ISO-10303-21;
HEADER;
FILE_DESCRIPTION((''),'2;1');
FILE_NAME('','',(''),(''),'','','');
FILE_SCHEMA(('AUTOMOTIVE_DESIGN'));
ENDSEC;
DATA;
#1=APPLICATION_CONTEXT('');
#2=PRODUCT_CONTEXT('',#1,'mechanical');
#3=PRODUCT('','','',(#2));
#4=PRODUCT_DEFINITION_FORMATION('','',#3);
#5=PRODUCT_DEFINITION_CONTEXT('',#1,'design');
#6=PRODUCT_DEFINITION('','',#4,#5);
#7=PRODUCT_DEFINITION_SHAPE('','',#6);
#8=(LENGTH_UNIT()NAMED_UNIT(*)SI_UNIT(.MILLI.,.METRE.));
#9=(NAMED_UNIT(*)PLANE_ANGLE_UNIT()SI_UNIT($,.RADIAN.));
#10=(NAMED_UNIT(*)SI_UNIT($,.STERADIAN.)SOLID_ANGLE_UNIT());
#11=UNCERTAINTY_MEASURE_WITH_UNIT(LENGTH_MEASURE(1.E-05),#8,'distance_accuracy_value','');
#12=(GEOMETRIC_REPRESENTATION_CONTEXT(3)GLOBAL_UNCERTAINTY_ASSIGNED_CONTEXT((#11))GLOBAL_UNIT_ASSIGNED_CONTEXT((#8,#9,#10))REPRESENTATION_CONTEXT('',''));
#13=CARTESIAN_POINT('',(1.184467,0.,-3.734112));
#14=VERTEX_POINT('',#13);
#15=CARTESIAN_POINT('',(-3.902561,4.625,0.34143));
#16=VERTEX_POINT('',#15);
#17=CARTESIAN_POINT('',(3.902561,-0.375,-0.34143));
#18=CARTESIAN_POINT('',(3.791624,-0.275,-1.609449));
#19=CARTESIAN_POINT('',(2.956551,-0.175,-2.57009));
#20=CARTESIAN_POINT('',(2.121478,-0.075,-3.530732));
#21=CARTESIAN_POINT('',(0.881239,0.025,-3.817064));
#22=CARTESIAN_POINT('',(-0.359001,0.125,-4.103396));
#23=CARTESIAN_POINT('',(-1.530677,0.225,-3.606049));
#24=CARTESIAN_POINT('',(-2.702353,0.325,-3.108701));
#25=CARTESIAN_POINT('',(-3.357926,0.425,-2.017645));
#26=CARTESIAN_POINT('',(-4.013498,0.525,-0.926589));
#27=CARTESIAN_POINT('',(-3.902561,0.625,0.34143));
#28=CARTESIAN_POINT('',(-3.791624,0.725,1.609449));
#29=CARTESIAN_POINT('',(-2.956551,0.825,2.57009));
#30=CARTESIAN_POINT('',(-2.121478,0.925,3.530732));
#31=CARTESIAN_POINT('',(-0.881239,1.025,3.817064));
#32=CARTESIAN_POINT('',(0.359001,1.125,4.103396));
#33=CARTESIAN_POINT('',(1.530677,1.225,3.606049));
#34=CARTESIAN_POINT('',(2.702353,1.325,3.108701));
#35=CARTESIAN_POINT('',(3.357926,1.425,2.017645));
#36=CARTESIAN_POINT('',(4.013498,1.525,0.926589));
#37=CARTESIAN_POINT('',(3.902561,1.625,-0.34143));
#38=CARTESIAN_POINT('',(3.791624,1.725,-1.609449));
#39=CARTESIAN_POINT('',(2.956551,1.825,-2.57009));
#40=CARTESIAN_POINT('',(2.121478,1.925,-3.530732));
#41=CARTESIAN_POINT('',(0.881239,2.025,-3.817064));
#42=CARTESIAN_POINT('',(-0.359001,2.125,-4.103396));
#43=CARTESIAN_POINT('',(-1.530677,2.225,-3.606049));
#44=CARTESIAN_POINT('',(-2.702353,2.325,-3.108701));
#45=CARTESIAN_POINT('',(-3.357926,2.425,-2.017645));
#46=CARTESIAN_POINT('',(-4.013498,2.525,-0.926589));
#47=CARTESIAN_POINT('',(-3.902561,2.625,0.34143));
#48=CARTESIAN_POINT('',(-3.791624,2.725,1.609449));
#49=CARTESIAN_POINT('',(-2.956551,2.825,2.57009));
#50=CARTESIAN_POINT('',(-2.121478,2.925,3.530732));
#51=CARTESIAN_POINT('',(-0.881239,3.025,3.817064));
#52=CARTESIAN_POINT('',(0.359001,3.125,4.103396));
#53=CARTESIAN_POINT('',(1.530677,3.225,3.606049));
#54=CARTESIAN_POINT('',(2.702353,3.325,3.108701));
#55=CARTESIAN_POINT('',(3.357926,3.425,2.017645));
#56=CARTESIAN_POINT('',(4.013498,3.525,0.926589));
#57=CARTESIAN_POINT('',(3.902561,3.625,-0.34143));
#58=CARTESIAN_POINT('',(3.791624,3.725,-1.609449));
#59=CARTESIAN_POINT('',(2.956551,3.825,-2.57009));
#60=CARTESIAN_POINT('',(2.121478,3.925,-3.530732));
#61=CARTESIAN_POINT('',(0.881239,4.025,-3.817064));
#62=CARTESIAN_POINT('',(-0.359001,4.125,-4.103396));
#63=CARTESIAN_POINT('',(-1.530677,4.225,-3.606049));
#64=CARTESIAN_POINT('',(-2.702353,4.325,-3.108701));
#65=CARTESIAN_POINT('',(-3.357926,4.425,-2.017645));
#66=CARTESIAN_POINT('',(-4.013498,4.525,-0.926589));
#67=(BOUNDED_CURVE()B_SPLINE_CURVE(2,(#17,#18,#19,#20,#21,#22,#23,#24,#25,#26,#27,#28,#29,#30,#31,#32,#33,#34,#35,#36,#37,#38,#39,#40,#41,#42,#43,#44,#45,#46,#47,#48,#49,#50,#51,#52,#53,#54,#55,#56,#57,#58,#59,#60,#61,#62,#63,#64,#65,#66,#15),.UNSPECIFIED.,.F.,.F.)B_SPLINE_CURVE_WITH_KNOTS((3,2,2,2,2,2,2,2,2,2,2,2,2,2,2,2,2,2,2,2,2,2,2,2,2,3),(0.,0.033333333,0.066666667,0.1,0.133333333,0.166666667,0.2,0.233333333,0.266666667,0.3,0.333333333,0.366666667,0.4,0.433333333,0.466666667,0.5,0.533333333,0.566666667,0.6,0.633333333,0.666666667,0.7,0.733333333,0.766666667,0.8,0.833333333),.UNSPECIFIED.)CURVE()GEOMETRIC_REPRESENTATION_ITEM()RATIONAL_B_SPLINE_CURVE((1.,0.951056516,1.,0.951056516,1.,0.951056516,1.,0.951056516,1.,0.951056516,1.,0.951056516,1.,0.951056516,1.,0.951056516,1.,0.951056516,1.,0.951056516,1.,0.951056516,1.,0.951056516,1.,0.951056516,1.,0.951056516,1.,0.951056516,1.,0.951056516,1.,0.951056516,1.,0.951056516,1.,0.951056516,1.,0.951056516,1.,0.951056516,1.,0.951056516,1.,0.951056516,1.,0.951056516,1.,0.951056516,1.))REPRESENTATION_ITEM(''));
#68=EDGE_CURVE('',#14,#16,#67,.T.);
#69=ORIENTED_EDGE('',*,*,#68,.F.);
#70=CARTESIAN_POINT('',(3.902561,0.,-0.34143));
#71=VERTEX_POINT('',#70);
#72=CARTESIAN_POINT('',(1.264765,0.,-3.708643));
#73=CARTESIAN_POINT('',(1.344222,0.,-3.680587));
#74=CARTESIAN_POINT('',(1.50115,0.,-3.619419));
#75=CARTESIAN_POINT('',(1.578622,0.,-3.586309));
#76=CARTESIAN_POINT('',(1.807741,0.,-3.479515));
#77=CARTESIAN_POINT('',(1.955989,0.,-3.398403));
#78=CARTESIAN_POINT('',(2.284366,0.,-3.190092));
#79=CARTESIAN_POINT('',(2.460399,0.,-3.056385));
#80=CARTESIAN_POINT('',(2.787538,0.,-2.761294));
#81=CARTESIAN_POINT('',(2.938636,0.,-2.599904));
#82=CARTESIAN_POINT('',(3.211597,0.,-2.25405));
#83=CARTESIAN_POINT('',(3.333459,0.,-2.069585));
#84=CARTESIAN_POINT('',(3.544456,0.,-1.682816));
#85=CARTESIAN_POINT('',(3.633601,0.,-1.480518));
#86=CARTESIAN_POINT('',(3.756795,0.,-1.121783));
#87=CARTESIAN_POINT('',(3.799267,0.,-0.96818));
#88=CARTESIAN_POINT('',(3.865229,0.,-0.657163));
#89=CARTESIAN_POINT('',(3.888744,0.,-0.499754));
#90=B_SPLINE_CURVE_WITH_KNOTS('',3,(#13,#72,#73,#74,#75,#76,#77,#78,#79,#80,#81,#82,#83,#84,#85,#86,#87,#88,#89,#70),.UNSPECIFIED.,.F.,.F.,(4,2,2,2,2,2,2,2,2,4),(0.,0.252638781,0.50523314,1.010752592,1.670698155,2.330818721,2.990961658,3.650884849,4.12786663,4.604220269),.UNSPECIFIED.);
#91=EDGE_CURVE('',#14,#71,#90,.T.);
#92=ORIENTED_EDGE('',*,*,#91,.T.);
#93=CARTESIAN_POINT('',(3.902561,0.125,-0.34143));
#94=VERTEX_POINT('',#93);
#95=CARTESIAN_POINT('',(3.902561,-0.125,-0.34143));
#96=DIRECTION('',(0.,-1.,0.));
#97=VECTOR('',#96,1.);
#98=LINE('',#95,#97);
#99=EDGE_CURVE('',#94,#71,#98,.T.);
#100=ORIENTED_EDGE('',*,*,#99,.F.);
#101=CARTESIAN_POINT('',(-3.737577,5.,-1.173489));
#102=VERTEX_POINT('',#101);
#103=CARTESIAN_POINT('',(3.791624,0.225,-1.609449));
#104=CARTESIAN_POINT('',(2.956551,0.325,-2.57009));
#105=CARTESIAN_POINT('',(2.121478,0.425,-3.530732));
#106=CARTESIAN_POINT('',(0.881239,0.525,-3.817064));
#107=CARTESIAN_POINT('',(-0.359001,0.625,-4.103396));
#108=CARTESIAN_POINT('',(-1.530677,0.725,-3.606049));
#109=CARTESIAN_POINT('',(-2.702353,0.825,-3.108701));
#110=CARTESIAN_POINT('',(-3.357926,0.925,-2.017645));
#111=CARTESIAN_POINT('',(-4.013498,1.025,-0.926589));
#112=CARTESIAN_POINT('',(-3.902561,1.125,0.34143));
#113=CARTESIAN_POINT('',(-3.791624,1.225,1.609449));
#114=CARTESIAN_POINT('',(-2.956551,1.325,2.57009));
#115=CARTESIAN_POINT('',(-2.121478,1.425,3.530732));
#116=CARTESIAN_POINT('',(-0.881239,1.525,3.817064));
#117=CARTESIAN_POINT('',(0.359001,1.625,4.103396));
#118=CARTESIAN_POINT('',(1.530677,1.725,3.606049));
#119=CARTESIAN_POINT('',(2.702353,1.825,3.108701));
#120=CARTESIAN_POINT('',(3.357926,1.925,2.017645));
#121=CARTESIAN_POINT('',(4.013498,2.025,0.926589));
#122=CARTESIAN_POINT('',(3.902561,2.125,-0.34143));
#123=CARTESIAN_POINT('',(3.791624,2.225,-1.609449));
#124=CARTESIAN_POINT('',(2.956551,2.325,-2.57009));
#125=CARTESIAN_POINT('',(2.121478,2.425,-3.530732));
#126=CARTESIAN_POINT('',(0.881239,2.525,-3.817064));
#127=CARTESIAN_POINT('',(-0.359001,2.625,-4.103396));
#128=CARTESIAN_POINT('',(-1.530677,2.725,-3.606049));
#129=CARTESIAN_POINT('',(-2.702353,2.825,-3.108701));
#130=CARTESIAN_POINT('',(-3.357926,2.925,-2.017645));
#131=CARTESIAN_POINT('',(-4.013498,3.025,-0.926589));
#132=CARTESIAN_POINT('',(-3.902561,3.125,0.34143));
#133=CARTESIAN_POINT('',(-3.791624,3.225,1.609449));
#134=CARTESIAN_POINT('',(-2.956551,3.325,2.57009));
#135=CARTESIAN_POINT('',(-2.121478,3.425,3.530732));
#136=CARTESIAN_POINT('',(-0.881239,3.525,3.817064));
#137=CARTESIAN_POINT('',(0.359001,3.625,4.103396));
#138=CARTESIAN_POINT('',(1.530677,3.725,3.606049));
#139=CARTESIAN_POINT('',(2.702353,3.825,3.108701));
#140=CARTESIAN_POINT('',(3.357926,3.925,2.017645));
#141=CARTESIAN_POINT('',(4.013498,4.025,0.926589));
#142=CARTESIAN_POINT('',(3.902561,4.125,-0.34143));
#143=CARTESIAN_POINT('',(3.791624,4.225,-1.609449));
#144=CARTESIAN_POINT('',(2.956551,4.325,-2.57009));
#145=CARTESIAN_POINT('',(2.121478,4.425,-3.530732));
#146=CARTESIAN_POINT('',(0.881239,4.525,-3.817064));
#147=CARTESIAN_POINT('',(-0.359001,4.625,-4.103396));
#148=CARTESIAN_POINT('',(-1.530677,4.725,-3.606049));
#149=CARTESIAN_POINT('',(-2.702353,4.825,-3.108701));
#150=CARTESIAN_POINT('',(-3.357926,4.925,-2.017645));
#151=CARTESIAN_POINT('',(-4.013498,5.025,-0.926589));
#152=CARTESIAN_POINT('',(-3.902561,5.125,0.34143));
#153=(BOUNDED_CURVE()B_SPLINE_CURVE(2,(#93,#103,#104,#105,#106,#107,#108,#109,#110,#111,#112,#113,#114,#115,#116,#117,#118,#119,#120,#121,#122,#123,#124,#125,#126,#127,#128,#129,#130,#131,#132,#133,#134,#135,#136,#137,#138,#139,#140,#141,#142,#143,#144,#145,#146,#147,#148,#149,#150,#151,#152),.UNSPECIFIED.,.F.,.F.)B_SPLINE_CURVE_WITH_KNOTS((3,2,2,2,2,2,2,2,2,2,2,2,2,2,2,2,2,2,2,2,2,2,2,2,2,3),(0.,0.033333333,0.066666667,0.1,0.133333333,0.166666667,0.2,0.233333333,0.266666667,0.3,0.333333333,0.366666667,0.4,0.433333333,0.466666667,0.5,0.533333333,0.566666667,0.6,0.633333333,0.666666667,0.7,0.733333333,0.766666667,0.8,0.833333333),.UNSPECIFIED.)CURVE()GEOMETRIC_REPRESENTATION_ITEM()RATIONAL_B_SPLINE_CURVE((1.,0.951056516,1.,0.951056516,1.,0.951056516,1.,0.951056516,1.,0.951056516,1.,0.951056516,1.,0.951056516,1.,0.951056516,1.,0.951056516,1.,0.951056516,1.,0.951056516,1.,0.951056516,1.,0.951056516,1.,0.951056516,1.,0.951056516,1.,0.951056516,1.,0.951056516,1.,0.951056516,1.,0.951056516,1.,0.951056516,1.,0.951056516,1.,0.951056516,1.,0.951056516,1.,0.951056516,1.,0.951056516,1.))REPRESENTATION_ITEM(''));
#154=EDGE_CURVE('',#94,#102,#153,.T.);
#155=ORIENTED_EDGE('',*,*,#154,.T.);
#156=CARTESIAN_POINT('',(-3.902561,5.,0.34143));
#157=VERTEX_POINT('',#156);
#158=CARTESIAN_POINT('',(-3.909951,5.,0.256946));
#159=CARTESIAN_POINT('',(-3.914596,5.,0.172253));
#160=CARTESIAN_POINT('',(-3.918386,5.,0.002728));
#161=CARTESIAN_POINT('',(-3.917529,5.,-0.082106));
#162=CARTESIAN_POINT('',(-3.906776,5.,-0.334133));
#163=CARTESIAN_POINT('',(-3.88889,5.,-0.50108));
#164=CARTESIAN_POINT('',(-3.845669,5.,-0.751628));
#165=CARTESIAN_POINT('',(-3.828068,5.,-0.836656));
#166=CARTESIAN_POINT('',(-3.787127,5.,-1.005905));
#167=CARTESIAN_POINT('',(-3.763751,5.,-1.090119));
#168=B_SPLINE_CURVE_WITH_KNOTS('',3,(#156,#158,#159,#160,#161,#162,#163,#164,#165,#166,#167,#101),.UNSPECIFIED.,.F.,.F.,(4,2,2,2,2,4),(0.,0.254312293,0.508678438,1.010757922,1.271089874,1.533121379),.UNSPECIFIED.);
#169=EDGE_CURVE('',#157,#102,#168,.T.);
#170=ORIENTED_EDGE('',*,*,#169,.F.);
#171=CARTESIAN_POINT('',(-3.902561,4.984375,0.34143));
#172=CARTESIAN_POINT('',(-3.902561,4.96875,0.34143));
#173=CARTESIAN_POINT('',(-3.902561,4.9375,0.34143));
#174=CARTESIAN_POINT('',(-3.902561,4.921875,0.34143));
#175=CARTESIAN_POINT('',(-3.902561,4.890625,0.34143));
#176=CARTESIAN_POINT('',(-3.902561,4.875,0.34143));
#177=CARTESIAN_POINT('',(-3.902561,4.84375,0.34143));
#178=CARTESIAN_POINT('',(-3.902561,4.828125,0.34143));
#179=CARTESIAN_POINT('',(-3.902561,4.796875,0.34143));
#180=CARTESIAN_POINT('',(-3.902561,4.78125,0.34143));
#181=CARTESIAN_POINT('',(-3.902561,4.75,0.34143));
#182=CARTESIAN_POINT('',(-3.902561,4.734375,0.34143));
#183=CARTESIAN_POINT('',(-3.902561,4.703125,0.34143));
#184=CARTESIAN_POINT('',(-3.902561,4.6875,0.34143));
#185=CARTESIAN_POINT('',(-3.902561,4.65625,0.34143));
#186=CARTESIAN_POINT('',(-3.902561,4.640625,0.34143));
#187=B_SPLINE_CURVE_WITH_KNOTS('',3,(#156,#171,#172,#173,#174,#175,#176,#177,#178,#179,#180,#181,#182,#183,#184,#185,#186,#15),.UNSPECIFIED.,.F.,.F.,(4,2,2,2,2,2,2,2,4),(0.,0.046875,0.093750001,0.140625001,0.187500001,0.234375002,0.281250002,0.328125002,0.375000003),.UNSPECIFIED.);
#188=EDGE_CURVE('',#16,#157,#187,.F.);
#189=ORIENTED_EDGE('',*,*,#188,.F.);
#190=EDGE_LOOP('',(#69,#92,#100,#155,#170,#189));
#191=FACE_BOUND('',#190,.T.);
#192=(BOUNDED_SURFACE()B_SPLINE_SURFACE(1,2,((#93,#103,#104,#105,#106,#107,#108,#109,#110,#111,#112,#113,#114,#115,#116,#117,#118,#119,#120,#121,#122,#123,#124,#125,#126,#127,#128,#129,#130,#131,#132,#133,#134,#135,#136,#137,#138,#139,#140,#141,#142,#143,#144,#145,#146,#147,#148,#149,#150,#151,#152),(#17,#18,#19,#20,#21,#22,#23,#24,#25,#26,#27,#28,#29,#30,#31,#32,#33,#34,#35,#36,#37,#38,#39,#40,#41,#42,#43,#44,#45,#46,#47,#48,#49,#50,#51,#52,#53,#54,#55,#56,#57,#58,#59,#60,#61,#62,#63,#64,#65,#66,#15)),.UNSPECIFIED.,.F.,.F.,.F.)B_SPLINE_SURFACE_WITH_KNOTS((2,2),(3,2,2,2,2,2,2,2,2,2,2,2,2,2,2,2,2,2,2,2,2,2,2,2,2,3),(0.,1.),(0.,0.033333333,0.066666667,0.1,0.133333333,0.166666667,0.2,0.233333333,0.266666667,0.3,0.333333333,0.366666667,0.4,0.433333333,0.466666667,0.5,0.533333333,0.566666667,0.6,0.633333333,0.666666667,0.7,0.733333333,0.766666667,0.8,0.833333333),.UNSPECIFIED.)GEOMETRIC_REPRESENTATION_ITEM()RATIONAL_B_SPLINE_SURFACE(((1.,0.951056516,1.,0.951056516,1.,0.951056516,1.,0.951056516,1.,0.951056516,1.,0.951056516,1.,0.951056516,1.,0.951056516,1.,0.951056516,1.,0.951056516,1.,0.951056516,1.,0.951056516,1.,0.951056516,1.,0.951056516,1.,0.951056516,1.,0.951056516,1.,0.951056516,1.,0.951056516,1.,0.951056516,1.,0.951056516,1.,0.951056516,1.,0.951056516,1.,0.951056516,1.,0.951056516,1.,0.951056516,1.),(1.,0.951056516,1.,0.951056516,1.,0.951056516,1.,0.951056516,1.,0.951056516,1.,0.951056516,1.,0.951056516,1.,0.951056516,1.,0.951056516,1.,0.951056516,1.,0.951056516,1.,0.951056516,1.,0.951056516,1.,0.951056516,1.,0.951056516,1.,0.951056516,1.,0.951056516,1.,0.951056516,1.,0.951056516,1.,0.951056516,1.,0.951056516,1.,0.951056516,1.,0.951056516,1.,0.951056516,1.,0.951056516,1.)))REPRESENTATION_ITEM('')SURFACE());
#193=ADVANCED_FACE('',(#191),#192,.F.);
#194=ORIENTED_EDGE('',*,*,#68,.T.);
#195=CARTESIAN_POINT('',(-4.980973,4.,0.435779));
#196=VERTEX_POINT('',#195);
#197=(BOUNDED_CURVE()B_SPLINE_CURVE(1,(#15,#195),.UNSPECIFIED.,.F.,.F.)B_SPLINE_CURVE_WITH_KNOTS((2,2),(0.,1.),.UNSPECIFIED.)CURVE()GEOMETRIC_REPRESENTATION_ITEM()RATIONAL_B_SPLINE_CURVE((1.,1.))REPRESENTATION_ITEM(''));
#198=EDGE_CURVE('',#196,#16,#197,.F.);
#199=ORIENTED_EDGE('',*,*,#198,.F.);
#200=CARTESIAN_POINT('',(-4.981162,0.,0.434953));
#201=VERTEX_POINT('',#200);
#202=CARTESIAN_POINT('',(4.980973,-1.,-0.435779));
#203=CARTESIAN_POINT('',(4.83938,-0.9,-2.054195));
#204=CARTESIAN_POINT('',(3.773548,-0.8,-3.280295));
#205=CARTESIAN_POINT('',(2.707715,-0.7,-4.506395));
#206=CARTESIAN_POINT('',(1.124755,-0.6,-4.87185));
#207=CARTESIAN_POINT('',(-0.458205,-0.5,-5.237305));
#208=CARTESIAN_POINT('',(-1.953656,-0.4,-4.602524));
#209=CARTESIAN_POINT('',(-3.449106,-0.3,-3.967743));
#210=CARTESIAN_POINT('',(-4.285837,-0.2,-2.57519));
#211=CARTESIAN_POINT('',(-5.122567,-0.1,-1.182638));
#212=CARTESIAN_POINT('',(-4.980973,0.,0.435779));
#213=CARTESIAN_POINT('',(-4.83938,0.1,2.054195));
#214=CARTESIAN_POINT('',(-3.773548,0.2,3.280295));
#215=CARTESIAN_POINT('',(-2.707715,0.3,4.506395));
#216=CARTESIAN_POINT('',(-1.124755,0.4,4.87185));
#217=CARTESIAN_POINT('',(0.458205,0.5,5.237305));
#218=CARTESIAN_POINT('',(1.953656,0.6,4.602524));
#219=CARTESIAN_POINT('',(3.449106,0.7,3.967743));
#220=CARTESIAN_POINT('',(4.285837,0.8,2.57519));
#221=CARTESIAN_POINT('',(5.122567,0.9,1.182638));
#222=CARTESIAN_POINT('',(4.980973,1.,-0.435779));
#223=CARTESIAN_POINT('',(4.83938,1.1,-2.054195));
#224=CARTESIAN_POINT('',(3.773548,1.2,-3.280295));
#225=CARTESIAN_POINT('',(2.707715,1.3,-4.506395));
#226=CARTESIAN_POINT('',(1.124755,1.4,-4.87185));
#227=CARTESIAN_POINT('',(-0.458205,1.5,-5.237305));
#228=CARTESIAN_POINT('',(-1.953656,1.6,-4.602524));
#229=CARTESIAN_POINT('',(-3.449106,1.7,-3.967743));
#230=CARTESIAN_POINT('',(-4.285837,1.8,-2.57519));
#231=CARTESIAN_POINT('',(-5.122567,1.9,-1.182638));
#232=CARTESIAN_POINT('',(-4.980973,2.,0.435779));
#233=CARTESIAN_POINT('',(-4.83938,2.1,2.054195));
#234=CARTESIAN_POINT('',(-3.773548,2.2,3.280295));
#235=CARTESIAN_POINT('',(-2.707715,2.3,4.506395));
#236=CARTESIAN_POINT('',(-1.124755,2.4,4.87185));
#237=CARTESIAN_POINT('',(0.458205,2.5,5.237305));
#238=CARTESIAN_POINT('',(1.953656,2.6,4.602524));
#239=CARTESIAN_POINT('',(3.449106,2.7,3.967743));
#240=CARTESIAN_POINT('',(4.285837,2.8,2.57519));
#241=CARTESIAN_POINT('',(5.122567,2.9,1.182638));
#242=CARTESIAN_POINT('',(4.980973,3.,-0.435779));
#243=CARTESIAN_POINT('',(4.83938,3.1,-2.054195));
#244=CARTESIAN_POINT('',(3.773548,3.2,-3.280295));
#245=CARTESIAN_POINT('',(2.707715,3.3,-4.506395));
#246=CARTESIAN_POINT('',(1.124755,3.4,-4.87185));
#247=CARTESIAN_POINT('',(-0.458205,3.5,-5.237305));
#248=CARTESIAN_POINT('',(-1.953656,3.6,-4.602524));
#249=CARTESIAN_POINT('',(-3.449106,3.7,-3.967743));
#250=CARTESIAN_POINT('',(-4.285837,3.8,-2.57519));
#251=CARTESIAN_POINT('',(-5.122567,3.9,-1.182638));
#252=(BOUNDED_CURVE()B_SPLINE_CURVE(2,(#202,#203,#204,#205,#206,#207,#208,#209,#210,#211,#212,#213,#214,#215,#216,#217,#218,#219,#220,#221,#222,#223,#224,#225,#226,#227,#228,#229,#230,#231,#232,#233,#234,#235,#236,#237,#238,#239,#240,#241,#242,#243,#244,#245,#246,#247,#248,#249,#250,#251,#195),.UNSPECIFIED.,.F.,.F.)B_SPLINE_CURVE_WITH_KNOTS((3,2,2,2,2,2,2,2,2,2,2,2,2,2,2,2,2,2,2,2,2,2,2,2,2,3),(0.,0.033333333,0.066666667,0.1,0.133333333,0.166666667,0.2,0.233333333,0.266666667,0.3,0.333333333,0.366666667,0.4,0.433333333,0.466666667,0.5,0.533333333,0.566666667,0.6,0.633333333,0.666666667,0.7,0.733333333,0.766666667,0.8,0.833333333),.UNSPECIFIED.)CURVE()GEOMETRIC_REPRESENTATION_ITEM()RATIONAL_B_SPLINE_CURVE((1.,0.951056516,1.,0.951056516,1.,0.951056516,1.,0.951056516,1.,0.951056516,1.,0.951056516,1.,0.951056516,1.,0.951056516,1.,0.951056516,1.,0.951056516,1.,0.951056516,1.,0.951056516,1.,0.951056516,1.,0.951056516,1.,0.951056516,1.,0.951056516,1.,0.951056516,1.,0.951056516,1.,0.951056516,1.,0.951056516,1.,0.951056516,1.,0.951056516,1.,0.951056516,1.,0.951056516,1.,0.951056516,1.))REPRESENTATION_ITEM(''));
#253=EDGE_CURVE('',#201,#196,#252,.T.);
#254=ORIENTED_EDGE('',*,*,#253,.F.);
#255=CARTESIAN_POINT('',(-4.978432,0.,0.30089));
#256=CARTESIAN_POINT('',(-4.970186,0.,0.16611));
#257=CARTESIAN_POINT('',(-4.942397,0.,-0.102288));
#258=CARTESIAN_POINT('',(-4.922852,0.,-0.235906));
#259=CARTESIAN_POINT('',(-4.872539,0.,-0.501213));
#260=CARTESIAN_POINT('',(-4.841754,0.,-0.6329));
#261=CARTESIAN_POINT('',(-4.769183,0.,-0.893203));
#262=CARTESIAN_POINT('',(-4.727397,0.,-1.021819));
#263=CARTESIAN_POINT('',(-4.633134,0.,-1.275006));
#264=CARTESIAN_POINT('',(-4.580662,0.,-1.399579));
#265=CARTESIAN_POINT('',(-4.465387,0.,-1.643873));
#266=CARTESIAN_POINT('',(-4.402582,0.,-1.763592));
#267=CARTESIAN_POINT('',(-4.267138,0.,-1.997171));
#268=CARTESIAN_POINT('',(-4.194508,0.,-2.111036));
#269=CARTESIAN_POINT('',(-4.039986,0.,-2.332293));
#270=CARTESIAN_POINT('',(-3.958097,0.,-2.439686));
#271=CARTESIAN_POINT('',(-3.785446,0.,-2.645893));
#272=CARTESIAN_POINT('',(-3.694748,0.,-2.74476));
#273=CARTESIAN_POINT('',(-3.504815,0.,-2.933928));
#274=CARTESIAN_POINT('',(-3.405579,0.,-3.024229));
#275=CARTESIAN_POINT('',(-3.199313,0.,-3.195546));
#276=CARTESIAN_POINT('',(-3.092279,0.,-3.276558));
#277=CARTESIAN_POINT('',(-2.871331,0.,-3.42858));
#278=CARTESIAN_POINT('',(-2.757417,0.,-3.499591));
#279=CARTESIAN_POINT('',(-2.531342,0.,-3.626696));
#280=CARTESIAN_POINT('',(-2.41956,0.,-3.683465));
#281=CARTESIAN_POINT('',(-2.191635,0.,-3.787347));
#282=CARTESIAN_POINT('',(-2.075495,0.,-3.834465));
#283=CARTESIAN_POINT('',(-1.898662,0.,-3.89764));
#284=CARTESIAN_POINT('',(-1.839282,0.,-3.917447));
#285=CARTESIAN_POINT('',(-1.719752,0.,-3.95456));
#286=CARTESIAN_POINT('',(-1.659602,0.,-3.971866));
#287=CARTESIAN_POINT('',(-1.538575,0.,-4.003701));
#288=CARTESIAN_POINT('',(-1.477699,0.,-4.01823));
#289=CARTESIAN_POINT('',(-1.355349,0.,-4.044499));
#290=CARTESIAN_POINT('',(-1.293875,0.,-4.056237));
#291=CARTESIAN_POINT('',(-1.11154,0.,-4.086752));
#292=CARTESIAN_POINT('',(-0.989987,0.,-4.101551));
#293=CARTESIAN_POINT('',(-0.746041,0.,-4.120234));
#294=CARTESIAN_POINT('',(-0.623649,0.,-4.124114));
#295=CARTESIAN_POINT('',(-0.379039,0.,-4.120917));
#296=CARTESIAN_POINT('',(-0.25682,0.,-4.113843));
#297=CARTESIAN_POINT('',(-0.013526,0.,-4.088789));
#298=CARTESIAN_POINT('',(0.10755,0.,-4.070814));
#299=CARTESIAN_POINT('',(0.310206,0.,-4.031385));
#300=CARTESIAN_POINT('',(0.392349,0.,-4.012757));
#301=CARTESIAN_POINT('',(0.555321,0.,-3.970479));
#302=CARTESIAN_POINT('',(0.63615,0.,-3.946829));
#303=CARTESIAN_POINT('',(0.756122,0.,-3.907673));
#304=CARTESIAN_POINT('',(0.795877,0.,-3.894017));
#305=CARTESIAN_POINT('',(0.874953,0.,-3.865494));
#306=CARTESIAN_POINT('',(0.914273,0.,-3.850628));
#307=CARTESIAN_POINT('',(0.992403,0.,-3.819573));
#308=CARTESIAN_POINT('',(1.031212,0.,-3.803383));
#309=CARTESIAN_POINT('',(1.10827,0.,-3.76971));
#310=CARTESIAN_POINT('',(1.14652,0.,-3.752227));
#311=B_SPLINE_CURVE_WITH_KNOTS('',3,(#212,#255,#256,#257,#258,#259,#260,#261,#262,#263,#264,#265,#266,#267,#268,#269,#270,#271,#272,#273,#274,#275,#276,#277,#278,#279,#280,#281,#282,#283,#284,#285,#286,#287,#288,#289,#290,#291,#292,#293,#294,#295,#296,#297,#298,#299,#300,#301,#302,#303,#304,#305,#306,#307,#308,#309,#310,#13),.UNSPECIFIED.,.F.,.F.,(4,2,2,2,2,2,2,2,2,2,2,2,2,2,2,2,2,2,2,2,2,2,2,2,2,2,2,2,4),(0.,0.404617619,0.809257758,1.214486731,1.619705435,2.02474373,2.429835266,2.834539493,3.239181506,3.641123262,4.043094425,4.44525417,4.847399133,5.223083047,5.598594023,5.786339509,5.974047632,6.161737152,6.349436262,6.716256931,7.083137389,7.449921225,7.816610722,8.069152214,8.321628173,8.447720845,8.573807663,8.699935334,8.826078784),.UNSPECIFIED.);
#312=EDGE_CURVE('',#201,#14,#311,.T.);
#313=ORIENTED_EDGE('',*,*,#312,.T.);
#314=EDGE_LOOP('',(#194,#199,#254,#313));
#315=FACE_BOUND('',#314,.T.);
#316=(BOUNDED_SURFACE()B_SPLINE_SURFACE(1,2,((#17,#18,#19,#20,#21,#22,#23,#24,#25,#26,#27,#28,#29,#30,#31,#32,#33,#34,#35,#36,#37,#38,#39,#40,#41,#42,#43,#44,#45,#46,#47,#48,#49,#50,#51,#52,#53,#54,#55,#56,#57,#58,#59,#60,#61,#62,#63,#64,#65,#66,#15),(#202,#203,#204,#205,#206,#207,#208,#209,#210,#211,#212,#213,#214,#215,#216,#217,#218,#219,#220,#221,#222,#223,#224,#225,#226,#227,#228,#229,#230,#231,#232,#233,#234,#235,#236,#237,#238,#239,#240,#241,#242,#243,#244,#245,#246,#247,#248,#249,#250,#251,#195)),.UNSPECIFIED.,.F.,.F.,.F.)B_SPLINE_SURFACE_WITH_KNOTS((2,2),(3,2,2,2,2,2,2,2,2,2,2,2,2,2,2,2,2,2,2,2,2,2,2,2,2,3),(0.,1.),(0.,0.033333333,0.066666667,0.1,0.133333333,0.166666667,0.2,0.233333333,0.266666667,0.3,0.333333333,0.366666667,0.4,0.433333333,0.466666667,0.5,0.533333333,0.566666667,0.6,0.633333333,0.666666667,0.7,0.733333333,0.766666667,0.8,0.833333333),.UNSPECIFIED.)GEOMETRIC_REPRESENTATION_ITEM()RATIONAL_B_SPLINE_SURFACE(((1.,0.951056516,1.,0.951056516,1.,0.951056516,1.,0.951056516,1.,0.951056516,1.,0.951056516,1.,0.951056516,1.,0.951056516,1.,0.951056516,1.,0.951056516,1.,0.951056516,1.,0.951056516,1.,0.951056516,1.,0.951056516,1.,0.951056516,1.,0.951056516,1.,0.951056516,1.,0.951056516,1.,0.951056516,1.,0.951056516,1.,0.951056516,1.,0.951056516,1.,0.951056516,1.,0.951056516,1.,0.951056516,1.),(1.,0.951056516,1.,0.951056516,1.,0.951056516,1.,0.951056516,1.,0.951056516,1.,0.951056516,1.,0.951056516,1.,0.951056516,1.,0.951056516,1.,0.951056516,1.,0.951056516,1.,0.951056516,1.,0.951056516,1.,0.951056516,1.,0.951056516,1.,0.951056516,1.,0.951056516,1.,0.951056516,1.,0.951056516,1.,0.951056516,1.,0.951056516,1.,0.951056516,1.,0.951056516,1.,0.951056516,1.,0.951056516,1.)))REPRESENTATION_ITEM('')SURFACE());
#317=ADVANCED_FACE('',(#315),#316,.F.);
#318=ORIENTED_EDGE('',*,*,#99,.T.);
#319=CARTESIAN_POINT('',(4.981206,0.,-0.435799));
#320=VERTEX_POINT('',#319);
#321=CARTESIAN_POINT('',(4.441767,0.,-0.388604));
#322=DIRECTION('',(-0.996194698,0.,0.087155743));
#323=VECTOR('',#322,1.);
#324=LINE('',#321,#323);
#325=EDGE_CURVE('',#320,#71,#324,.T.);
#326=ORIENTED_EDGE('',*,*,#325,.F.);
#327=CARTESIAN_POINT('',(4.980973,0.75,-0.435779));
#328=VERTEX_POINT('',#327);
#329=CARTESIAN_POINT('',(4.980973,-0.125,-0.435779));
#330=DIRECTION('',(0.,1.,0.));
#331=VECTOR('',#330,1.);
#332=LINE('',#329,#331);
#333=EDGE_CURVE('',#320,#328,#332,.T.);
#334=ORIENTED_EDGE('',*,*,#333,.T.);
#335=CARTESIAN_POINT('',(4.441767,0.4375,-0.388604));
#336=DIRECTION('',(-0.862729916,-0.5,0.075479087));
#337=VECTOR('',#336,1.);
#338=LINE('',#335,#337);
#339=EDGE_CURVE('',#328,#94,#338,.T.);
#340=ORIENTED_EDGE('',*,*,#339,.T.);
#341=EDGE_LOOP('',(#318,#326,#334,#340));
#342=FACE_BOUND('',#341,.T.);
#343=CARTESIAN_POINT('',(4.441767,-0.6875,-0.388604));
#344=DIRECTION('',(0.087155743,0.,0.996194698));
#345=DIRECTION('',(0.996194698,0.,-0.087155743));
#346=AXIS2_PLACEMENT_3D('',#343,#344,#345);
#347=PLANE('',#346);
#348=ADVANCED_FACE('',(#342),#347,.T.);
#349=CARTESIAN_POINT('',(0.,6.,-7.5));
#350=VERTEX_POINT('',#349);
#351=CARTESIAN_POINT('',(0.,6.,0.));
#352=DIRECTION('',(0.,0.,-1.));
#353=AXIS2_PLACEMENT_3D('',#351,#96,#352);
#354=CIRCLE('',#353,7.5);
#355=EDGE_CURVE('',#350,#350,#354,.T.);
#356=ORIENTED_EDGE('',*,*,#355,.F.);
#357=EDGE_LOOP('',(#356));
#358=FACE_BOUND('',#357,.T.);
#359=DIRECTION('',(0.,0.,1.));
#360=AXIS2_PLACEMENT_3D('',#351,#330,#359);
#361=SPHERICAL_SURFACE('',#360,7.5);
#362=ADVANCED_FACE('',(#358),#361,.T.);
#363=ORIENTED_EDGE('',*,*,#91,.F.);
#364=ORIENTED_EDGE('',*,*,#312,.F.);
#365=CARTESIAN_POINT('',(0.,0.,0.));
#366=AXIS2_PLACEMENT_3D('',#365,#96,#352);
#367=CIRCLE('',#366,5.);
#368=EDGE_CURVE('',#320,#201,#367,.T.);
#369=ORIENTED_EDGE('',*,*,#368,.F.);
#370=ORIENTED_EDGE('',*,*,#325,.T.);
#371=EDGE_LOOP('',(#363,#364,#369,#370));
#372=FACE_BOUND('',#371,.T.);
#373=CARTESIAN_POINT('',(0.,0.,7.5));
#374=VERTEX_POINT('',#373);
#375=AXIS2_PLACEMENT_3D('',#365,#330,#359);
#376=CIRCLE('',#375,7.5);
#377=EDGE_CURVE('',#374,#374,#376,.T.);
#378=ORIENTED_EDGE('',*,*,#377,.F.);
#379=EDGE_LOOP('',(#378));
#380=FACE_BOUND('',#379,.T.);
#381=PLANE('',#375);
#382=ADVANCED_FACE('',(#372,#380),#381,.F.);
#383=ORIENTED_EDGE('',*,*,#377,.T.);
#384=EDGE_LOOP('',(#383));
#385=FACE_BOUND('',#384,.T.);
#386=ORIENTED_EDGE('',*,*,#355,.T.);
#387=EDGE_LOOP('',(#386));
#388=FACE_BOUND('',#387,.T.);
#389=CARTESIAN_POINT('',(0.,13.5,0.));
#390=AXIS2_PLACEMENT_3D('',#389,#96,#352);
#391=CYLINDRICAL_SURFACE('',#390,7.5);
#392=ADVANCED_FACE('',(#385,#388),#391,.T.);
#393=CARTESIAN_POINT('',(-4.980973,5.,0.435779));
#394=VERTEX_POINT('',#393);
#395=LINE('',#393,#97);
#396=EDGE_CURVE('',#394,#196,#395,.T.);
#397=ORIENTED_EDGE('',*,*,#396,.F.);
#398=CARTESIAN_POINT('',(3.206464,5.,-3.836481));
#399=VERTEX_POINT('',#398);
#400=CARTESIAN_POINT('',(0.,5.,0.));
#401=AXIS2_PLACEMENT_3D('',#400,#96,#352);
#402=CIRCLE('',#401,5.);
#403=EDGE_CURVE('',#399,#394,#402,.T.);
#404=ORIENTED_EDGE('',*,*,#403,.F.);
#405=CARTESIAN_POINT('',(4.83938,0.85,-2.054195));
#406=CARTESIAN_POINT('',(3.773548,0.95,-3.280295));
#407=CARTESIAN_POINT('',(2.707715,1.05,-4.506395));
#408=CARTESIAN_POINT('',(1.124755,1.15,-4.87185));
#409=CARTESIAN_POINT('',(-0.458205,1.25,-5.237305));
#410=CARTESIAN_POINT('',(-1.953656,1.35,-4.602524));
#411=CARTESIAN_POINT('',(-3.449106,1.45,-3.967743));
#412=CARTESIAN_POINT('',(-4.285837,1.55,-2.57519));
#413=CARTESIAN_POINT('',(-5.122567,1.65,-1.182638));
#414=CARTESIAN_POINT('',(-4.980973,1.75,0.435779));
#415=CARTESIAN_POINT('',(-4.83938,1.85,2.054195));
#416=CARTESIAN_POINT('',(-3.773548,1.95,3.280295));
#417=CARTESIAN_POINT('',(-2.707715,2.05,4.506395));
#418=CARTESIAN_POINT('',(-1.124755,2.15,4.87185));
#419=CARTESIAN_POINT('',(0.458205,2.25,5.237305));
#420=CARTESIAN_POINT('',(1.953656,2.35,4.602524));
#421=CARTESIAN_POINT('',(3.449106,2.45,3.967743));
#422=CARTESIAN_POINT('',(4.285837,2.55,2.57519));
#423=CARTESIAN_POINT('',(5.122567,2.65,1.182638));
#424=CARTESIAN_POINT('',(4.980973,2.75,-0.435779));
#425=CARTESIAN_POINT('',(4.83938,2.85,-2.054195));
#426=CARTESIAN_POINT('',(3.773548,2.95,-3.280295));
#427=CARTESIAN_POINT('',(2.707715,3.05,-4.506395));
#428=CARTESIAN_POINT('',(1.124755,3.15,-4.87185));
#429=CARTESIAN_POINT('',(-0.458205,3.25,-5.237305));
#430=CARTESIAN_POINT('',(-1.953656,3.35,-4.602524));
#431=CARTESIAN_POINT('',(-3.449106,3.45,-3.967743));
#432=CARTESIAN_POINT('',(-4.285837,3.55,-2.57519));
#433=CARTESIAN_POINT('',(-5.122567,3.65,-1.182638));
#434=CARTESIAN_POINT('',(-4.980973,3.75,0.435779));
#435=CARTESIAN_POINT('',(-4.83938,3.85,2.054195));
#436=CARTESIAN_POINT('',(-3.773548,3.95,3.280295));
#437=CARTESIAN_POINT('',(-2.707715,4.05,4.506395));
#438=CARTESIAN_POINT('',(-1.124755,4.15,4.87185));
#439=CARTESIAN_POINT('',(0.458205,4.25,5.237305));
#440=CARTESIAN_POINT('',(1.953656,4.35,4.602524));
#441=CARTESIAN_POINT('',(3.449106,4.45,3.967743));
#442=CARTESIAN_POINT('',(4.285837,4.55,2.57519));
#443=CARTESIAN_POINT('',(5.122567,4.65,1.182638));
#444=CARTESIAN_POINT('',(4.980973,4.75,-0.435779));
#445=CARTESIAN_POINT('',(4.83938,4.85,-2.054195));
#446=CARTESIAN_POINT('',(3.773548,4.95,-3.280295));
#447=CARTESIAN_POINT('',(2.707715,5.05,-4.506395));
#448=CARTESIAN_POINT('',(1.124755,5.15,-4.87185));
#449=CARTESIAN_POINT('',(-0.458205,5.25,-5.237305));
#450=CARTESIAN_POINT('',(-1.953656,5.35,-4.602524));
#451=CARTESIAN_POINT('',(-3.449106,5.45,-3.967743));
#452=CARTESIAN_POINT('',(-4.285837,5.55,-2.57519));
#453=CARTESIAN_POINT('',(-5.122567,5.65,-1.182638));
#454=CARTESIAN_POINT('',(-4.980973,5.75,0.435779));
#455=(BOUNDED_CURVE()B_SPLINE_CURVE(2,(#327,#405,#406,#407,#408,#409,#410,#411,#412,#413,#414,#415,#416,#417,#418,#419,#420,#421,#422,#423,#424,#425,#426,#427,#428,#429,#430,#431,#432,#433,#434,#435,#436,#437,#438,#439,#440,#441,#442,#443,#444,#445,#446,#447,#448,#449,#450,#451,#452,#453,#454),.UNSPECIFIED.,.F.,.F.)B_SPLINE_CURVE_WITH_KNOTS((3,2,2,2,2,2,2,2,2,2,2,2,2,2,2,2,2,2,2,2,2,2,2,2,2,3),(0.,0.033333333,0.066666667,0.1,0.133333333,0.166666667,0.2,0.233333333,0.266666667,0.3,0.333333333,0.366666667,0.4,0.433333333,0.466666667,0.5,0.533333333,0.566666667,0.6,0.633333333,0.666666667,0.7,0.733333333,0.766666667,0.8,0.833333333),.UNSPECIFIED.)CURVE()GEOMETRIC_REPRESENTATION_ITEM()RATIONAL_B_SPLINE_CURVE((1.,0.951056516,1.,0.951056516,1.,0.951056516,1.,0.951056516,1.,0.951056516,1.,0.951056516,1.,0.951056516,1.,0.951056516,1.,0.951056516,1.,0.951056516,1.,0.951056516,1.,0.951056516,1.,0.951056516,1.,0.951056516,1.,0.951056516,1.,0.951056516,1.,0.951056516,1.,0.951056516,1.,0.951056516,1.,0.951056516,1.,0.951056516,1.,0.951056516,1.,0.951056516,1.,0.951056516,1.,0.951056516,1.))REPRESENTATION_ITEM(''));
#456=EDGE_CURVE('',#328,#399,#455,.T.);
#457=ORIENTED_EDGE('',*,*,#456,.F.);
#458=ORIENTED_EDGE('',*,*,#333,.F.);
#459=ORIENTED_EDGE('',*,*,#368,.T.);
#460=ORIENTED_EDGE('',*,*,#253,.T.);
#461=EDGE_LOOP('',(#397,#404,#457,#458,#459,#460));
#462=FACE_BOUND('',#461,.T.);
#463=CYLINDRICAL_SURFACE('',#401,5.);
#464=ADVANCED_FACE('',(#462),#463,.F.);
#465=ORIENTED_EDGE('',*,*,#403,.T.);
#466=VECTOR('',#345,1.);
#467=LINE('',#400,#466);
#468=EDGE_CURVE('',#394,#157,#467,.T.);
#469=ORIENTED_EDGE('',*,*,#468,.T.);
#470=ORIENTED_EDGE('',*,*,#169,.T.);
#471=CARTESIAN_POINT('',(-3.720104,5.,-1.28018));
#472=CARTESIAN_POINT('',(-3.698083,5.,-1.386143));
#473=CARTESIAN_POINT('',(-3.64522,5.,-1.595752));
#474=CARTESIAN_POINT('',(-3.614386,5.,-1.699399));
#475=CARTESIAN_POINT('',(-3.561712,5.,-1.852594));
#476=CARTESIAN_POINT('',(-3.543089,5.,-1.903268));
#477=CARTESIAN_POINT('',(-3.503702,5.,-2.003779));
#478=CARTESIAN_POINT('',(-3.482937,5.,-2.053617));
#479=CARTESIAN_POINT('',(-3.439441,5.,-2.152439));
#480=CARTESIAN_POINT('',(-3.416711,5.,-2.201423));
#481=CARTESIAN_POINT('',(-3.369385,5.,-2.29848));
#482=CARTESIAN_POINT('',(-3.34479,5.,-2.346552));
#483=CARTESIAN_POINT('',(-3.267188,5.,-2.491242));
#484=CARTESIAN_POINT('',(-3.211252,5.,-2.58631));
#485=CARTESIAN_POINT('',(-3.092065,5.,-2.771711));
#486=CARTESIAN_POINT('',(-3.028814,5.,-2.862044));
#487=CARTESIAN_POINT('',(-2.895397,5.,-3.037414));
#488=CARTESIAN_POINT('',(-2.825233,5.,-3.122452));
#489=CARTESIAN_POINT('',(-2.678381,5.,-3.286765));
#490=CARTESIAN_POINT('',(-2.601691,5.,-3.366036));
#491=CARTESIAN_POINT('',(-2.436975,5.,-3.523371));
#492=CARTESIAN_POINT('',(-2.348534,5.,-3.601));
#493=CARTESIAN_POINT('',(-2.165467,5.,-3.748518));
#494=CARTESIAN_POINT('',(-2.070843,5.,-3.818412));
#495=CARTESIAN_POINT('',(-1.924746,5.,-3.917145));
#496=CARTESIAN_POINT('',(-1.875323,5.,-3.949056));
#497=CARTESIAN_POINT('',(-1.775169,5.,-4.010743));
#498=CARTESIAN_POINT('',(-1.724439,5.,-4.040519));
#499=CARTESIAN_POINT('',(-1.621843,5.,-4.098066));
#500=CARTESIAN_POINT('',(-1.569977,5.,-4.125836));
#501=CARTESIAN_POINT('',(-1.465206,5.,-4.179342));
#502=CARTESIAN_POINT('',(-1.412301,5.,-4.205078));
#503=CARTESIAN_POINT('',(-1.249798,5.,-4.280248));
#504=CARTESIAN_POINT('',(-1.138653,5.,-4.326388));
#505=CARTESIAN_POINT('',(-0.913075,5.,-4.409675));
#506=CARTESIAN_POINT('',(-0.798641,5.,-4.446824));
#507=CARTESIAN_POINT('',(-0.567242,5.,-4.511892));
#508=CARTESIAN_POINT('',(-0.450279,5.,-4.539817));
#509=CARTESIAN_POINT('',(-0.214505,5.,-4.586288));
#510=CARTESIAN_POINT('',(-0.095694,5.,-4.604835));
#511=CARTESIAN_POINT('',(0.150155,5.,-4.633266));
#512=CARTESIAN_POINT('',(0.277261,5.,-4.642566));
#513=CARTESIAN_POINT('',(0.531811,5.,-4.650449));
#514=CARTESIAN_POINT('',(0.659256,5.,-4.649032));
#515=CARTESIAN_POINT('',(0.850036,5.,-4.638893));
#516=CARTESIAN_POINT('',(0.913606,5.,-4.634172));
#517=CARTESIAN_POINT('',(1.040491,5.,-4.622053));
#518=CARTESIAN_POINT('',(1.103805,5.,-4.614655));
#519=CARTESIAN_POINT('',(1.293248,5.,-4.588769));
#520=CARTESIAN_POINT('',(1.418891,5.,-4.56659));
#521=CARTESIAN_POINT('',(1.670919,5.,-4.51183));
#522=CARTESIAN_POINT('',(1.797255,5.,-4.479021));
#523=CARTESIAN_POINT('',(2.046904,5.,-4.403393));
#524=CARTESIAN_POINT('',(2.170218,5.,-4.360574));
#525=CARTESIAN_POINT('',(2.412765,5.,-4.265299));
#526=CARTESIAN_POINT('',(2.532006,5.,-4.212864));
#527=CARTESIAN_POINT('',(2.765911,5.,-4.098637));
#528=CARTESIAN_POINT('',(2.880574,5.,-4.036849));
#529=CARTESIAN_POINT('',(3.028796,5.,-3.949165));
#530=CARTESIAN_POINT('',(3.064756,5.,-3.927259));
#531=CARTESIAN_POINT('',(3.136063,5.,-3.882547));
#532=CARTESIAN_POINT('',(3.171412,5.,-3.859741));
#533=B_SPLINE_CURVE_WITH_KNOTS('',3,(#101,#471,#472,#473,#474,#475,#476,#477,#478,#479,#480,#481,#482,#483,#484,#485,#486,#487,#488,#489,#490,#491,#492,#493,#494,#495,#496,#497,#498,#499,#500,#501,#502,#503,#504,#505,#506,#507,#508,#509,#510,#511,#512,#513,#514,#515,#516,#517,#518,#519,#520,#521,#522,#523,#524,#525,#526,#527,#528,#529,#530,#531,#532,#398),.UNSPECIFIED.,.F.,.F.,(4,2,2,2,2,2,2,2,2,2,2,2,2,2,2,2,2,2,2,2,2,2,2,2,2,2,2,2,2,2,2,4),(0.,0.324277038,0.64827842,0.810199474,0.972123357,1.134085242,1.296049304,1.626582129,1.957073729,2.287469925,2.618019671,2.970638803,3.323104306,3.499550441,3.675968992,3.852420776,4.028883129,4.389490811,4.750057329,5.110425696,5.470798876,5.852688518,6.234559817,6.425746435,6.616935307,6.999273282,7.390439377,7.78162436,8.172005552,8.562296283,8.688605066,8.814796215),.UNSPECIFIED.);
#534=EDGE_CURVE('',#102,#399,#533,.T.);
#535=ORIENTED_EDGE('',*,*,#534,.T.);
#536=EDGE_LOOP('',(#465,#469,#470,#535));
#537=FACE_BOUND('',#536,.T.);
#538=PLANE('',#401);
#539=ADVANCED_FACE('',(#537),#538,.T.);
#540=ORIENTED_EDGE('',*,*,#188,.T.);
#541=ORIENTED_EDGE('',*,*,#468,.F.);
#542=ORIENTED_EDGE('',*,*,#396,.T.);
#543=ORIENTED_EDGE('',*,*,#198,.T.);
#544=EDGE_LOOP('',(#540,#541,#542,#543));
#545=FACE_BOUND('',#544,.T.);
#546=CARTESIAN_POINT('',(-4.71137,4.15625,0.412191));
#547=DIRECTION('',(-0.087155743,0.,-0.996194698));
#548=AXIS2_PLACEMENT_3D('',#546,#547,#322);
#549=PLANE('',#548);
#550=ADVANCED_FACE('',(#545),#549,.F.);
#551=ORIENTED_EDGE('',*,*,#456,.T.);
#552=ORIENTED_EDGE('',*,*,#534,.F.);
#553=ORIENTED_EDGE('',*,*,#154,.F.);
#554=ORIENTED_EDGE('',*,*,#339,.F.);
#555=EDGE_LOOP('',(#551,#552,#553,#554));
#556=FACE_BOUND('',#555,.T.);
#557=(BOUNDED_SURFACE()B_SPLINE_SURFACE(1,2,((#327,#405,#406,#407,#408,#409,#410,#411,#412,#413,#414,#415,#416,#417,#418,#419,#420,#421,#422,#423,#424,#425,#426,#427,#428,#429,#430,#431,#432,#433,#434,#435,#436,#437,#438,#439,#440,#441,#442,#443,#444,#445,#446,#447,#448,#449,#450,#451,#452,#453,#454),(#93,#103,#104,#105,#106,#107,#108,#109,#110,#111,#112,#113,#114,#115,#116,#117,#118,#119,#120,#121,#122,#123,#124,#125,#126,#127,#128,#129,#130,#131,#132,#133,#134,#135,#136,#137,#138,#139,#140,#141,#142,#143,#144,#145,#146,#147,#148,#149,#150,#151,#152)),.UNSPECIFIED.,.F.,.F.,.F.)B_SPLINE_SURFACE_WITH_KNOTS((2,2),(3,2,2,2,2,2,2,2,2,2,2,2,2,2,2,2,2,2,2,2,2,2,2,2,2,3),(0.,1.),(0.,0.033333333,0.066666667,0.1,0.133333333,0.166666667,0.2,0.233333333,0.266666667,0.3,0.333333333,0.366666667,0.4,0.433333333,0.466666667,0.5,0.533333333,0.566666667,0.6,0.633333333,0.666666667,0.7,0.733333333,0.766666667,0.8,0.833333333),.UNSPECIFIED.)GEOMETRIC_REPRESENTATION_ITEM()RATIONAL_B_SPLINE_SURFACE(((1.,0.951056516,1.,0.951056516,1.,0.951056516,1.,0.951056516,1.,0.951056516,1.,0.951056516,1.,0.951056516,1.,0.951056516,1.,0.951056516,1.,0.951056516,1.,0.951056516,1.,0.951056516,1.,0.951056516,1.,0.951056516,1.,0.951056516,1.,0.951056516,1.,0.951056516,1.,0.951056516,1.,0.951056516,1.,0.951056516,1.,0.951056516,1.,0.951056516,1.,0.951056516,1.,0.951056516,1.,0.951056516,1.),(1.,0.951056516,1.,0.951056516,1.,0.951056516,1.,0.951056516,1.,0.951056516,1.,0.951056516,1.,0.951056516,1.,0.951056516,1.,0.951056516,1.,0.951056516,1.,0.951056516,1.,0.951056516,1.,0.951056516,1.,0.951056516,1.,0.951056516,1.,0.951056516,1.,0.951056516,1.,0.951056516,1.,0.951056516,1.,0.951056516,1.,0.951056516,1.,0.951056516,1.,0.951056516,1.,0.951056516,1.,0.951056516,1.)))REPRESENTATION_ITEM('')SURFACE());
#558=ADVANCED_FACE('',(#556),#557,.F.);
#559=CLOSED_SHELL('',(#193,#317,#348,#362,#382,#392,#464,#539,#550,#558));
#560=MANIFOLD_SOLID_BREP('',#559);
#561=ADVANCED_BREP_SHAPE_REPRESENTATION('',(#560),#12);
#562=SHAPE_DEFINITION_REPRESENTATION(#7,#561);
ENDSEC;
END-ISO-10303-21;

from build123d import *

# Parameters (mm, degrees)
SKETCH2_R           = 7.5
BOSS_EXTRUDE1_DEPTH = 13.5
SKETCH3_R           = 5
CUT_EXTRUDE1_DEPTH  = 5
FILLET1_R           = 7.5
THREAD1_PITCH       = 2
SKETCH10_W          = 14.918293933
SKETCH10_H          = 11.930208352
CUT_EXTRUDE2_DEPTH  = 5


with BuildPart() as part:
    # Sketch2 → Boss-Extrude1 (new body)
    with BuildSketch(Plane(origin=(0, 0, 0), x_dir=(1, 0, 0), z_dir=(0, 1, 0))):
        with Locations(Location((0, 0, 0), (0, 0, 270))):
            Circle(SKETCH2_R)
    extrude(amount=BOSS_EXTRUDE1_DEPTH)

    # Sketch3 → Cut-Extrude1 (cut)
    with BuildSketch(Plane(origin=(0, 0, 0), x_dir=(-1, 0, 0), z_dir=(0, -1, 0))):
        with Locations(Location((0, 0, 0), (0, 0, 90))):
            Circle(SKETCH3_R)
    extrude(amount=-CUT_EXTRUDE1_DEPTH, mode=Mode.SUBTRACT)

    # Fillet1
    fillet1_edges = [part.edges().sort_by_distance(p)[0] for p in [
        (0, 13.5, -7.5),
    ]]
    fillet(fillet1_edges, radius=FILLET1_R)

    # Thread1: the profile of Thread Profile2 profile screwed along a right-hand helix of 2.5 turns, 10 arcs to a turn; built about Z, then put on its axis
    thread1_z = Axis((0, 0, 0), (0, 0, 1))
    thread1_corners = [(5.0003, -1e-09, -0.000173205), (5.0003, -1e-09, 1.7501732), (3.91746825, -1e-09, 1.124999997), (3.91746825, -1e-09, 0.624999997)]
    with BuildLine(mode=Mode.PRIVATE) as thread1_profile:
        Line(thread1_corners[0], thread1_corners[1])
        Line(thread1_corners[1], thread1_corners[2])
        Line(thread1_corners[2], thread1_corners[3])
        Line(thread1_corners[3], thread1_corners[0])
    thread1_cap = Face(thread1_profile.wire())
    thread1_turn_angles = [0, 18, 36, 54, 72, 90, 108, 126, 144, 162, 180, 198, 216, 234, 252, 270, 288, 306, 324, 342, 360]
    thread1_turn_weights = [1, 0.9510565162951535, 1, 0.9510565162951535, 1, 0.9510565162951535, 1, 0.9510565162951535, 1, 0.9510565162951535, 1, 0.9510565162951535, 1, 0.9510565162951535, 1, 0.9510565162951535, 1, 0.9510565162951535, 1, 0.9510565162951535, 1]
    thread1_turn_rails = [Edge.make_bspline([Vector(p[0], p[1], 0).rotate(thread1_z, thread1_turn_angles[k]) / thread1_turn_weights[k] + Vector(0, 0, p[2] + THREAD1_PITCH * thread1_turn_angles[k] / 360) for k in range(21)], [0, 0, 0, 1, 1, 2, 2, 3, 3, 4, 4, 5, 5, 6, 6, 7, 7, 8, 8, 9, 9, 10, 10, 10], 2, thread1_turn_weights) for p in thread1_corners]
    thread1_turn_sides = [Face.make_surface_from_curves(thread1_turn_rails[p[0]], thread1_turn_rails[p[1]]) for p in [(0, 1), (1, 2), (2, 3), (3, 0)]]
    thread1_last_angles = [720, 738, 756, 774, 792, 810, 828, 846, 864, 882, 900]
    thread1_last_weights = [1, 0.9510565162951535, 1, 0.9510565162951535, 1, 0.9510565162951535, 1, 0.9510565162951535, 1, 0.9510565162951539, 1]
    thread1_last_rails = [Edge.make_bspline([Vector(p[0], p[1], 0).rotate(thread1_z, thread1_last_angles[k]) / thread1_last_weights[k] + Vector(0, 0, p[2] + THREAD1_PITCH * thread1_last_angles[k] / 360) for k in range(11)], [0, 0, 0, 1, 1, 2, 2, 3, 3, 4, 4, 5, 5, 5], 2, thread1_last_weights) for p in thread1_corners]
    thread1_last_sides = [Face.make_surface_from_curves(thread1_last_rails[p[0]], thread1_last_rails[p[1]]) for p in [(0, 1), (1, 2), (2, 3), (3, 0)]]
    thread1 = Plane(origin=(0, -1, 0), x_dir=(0.996194698, 0, -0.087155743), z_dir=(0, 1, 0)) * Solid(Shell([*[p.moved(Location((0, 0, THREAD1_PITCH * i))) for i in range(2) for p in thread1_turn_sides], *thread1_last_sides, thread1_cap, thread1_cap.rotate(thread1_z, 900).moved(Location((0, 0, THREAD1_PITCH * 900 / 360)))]))
    add(thread1)

    # Sketch10 → Cut-Extrude2 (cut)
    with BuildSketch(Plane(origin=(0, 0, 0), x_dir=(-1, 0, 0), z_dir=(0, -1, 0))):
        with Locations((1.239502166, -0.263539638)):
            Rectangle(SKETCH10_W, SKETCH10_H)
    extrude(amount=CUT_EXTRUDE2_DEPTH, mode=Mode.SUBTRACT)


solid = part.part
